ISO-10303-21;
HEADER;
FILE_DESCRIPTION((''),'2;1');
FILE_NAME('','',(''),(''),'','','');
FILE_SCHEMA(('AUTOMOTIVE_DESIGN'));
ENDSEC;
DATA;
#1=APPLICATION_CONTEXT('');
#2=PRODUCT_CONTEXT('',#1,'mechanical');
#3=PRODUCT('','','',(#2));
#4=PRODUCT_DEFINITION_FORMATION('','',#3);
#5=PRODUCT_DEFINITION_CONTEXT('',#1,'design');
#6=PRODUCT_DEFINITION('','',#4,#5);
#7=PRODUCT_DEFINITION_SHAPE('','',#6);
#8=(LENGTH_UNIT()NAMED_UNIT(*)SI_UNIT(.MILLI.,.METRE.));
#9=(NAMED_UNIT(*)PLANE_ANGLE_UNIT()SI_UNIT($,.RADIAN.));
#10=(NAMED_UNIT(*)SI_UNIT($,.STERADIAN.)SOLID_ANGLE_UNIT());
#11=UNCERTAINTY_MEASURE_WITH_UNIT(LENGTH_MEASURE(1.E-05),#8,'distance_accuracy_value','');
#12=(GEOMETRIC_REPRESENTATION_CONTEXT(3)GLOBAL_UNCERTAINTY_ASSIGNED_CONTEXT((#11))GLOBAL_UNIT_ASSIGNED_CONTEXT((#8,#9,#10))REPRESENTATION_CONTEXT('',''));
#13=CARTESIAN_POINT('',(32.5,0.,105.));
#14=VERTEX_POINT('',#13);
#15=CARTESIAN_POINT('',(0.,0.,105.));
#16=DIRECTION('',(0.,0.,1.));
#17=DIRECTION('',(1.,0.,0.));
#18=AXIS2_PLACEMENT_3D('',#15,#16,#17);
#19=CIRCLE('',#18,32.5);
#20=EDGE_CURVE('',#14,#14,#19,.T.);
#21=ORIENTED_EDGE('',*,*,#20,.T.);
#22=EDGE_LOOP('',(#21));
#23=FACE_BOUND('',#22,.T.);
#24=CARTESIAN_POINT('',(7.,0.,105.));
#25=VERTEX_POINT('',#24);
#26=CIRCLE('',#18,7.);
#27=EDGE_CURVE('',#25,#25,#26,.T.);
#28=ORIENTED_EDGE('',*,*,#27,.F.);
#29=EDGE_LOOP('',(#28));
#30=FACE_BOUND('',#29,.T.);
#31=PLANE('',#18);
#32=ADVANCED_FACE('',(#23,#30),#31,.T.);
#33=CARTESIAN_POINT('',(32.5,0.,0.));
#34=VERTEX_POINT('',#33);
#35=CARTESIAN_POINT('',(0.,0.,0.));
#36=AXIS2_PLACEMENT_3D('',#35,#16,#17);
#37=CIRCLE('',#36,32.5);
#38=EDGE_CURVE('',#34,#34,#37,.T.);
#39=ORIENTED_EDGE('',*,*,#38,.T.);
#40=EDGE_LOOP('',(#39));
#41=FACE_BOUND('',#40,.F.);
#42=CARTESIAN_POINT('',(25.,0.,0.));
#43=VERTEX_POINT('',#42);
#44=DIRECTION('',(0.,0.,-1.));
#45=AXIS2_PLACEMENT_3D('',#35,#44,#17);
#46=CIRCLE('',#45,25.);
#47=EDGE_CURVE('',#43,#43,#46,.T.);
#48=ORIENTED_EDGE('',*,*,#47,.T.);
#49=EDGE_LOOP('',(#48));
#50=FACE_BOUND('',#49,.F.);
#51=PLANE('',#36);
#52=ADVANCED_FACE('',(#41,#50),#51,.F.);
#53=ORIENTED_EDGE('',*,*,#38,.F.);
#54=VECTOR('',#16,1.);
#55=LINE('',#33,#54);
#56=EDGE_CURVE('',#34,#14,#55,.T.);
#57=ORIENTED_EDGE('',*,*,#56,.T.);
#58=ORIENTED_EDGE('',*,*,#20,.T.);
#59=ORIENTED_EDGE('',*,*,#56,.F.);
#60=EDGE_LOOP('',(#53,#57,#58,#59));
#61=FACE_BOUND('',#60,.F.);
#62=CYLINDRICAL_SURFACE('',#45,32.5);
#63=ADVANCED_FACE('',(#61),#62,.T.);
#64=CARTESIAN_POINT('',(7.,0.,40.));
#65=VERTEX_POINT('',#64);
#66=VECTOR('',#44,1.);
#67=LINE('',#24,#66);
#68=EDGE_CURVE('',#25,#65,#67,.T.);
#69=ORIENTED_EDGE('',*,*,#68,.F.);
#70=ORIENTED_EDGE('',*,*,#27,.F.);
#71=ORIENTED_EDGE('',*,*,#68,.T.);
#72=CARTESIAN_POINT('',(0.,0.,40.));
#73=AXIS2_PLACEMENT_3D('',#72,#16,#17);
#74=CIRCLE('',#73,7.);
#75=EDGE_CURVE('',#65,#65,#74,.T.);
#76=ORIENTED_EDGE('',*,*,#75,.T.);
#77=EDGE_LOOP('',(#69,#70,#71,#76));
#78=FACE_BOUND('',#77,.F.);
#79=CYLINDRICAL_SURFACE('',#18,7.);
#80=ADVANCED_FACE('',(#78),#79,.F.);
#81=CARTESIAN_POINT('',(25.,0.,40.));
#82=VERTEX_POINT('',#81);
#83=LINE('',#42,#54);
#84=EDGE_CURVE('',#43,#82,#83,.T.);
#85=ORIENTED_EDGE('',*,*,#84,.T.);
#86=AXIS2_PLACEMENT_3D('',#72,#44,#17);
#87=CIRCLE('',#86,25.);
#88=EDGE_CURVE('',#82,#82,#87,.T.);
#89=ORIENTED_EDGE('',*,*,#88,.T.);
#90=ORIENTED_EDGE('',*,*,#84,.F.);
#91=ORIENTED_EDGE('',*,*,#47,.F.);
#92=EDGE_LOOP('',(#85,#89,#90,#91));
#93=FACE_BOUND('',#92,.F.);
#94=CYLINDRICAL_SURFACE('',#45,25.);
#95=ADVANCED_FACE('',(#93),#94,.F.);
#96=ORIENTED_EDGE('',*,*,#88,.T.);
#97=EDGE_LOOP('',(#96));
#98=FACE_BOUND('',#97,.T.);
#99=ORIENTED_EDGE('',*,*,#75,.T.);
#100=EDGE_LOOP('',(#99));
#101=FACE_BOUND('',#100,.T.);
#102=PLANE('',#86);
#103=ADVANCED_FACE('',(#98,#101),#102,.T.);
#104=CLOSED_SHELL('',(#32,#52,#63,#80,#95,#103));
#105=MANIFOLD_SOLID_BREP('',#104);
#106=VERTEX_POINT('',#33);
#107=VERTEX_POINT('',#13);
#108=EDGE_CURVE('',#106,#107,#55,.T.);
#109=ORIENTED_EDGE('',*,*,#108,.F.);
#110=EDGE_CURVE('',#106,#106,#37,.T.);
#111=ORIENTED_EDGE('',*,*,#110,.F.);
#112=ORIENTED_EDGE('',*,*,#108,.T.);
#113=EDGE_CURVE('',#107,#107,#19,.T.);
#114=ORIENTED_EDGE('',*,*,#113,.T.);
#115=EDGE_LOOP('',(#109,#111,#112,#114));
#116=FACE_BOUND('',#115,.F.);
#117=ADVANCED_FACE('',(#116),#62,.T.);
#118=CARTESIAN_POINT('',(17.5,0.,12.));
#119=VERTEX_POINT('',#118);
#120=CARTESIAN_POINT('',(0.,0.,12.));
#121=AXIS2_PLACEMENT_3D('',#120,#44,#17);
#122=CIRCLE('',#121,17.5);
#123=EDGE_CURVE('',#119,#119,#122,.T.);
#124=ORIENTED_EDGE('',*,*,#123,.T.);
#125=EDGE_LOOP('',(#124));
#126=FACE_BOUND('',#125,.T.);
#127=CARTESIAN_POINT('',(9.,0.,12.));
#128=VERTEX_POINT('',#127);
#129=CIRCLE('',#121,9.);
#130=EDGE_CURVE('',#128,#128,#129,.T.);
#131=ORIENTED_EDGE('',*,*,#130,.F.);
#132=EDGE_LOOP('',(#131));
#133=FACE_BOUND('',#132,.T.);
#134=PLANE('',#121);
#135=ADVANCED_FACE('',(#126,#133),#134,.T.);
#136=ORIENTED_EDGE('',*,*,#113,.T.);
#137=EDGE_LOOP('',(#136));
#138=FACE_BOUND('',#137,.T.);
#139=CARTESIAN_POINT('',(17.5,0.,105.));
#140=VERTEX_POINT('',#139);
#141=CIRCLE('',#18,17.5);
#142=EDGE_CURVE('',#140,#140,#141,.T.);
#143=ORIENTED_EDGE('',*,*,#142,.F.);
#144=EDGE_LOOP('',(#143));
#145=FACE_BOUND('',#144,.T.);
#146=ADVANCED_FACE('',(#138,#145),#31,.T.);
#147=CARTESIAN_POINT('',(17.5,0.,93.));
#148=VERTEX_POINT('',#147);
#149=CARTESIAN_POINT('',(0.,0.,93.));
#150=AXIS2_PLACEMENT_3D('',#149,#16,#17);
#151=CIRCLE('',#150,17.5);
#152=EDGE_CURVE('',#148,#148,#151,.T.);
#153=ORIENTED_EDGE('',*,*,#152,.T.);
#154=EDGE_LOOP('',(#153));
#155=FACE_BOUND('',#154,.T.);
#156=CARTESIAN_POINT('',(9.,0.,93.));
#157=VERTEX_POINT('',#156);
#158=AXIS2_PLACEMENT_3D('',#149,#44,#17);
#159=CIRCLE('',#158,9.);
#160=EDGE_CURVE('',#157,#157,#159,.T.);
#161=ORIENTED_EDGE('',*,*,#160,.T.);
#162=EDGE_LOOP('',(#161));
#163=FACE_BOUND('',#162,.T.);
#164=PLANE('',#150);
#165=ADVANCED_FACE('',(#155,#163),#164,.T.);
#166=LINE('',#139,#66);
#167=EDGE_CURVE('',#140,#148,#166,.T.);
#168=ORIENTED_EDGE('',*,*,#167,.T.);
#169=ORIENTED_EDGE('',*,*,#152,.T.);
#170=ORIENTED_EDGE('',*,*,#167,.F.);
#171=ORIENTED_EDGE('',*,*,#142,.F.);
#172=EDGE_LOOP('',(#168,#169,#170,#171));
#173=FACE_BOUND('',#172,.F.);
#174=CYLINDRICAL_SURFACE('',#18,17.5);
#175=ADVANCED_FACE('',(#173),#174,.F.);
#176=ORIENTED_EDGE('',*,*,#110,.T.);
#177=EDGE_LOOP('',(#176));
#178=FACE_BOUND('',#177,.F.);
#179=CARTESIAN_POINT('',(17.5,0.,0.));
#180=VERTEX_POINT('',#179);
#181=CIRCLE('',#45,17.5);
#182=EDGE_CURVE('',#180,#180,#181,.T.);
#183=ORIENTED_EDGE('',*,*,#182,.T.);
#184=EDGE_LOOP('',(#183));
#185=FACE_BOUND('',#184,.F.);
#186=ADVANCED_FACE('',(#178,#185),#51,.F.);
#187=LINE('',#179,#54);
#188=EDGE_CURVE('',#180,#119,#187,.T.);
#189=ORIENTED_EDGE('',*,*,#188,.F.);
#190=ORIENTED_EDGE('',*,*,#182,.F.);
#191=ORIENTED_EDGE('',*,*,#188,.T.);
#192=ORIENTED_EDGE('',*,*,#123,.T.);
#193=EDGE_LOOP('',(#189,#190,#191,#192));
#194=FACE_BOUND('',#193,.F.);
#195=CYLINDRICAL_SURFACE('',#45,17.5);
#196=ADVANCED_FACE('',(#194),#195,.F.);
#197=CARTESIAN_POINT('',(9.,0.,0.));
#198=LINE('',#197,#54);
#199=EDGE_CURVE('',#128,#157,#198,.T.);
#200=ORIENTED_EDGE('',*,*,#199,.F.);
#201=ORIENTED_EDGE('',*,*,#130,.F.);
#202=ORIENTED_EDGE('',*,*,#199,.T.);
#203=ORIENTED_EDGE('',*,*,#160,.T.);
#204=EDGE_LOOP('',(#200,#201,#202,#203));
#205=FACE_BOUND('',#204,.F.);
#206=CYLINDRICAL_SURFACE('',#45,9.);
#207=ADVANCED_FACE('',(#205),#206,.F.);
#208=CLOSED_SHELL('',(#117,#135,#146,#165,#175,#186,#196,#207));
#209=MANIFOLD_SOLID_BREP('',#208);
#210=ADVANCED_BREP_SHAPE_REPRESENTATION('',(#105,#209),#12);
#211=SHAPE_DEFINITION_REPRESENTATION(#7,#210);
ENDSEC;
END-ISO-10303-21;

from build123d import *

# Parameters (mm, degrees)
F0_R      = 32.5
F1_DEPTH  = 105
F2_R      = 7
F3_DEPTH  = 110
F4_R      = 25
F5_DEPTH  = 40
F7_DEPTH  = 105
F8_R      = 9
F9_DEPTH  = 105
F10_R     = 17.5
F10_R_2   = 9
F11_DEPTH = 12
F12_R     = 17.5
F13_DEPTH = 12


with BuildPart() as f1:
    # F0 (on Top) → F1 (new body)
    with BuildSketch(Plane.XY):
        Circle(F0_R)
    extrude(amount=F1_DEPTH)

    # F2 (on face) → F3 (cut)
    with BuildSketch(Plane.XY.offset(105)):
        Circle(F2_R)
    extrude(amount=-F3_DEPTH, mode=Mode.SUBTRACT)

    # F4 (on face) → F5 (cut)
    with BuildSketch(Plane(origin=(0, 0, 0), x_dir=(1, 0, 0), z_dir=(0, 0, -1))):
        Circle(F4_R)
    extrude(amount=-F5_DEPTH, mode=Mode.SUBTRACT)


with BuildPart() as f7:
    # F0 (on Top) → F7 (new body)
    with BuildSketch(Plane.XY):
        Circle(F0_R)
    extrude(amount=F7_DEPTH)

    # F8 (on face) → F9 (cut)
    with BuildSketch(Plane(origin=(0, 0, 0), x_dir=(1, 0, 0), z_dir=(0, 0, -1))):
        Circle(F8_R)
    extrude(amount=-F9_DEPTH, mode=Mode.SUBTRACT)

    # F10 (on face) → F11 (cut)
    with BuildSketch(Plane(origin=(0, 0, 0), x_dir=(1, 0, 0), z_dir=(0, 0, -1))):
        Circle(F10_R)
        Circle(F10_R_2, mode=Mode.SUBTRACT)
        Circle(F10_R)
    extrude(amount=-F11_DEPTH, mode=Mode.SUBTRACT)

    # F12 (on face) → F13 (cut)
    with BuildSketch(Plane.XY.offset(105)):
        Circle(F12_R)
    extrude(amount=-F13_DEPTH, mode=Mode.SUBTRACT)


solid = Compound([f1.part, f7.part])
